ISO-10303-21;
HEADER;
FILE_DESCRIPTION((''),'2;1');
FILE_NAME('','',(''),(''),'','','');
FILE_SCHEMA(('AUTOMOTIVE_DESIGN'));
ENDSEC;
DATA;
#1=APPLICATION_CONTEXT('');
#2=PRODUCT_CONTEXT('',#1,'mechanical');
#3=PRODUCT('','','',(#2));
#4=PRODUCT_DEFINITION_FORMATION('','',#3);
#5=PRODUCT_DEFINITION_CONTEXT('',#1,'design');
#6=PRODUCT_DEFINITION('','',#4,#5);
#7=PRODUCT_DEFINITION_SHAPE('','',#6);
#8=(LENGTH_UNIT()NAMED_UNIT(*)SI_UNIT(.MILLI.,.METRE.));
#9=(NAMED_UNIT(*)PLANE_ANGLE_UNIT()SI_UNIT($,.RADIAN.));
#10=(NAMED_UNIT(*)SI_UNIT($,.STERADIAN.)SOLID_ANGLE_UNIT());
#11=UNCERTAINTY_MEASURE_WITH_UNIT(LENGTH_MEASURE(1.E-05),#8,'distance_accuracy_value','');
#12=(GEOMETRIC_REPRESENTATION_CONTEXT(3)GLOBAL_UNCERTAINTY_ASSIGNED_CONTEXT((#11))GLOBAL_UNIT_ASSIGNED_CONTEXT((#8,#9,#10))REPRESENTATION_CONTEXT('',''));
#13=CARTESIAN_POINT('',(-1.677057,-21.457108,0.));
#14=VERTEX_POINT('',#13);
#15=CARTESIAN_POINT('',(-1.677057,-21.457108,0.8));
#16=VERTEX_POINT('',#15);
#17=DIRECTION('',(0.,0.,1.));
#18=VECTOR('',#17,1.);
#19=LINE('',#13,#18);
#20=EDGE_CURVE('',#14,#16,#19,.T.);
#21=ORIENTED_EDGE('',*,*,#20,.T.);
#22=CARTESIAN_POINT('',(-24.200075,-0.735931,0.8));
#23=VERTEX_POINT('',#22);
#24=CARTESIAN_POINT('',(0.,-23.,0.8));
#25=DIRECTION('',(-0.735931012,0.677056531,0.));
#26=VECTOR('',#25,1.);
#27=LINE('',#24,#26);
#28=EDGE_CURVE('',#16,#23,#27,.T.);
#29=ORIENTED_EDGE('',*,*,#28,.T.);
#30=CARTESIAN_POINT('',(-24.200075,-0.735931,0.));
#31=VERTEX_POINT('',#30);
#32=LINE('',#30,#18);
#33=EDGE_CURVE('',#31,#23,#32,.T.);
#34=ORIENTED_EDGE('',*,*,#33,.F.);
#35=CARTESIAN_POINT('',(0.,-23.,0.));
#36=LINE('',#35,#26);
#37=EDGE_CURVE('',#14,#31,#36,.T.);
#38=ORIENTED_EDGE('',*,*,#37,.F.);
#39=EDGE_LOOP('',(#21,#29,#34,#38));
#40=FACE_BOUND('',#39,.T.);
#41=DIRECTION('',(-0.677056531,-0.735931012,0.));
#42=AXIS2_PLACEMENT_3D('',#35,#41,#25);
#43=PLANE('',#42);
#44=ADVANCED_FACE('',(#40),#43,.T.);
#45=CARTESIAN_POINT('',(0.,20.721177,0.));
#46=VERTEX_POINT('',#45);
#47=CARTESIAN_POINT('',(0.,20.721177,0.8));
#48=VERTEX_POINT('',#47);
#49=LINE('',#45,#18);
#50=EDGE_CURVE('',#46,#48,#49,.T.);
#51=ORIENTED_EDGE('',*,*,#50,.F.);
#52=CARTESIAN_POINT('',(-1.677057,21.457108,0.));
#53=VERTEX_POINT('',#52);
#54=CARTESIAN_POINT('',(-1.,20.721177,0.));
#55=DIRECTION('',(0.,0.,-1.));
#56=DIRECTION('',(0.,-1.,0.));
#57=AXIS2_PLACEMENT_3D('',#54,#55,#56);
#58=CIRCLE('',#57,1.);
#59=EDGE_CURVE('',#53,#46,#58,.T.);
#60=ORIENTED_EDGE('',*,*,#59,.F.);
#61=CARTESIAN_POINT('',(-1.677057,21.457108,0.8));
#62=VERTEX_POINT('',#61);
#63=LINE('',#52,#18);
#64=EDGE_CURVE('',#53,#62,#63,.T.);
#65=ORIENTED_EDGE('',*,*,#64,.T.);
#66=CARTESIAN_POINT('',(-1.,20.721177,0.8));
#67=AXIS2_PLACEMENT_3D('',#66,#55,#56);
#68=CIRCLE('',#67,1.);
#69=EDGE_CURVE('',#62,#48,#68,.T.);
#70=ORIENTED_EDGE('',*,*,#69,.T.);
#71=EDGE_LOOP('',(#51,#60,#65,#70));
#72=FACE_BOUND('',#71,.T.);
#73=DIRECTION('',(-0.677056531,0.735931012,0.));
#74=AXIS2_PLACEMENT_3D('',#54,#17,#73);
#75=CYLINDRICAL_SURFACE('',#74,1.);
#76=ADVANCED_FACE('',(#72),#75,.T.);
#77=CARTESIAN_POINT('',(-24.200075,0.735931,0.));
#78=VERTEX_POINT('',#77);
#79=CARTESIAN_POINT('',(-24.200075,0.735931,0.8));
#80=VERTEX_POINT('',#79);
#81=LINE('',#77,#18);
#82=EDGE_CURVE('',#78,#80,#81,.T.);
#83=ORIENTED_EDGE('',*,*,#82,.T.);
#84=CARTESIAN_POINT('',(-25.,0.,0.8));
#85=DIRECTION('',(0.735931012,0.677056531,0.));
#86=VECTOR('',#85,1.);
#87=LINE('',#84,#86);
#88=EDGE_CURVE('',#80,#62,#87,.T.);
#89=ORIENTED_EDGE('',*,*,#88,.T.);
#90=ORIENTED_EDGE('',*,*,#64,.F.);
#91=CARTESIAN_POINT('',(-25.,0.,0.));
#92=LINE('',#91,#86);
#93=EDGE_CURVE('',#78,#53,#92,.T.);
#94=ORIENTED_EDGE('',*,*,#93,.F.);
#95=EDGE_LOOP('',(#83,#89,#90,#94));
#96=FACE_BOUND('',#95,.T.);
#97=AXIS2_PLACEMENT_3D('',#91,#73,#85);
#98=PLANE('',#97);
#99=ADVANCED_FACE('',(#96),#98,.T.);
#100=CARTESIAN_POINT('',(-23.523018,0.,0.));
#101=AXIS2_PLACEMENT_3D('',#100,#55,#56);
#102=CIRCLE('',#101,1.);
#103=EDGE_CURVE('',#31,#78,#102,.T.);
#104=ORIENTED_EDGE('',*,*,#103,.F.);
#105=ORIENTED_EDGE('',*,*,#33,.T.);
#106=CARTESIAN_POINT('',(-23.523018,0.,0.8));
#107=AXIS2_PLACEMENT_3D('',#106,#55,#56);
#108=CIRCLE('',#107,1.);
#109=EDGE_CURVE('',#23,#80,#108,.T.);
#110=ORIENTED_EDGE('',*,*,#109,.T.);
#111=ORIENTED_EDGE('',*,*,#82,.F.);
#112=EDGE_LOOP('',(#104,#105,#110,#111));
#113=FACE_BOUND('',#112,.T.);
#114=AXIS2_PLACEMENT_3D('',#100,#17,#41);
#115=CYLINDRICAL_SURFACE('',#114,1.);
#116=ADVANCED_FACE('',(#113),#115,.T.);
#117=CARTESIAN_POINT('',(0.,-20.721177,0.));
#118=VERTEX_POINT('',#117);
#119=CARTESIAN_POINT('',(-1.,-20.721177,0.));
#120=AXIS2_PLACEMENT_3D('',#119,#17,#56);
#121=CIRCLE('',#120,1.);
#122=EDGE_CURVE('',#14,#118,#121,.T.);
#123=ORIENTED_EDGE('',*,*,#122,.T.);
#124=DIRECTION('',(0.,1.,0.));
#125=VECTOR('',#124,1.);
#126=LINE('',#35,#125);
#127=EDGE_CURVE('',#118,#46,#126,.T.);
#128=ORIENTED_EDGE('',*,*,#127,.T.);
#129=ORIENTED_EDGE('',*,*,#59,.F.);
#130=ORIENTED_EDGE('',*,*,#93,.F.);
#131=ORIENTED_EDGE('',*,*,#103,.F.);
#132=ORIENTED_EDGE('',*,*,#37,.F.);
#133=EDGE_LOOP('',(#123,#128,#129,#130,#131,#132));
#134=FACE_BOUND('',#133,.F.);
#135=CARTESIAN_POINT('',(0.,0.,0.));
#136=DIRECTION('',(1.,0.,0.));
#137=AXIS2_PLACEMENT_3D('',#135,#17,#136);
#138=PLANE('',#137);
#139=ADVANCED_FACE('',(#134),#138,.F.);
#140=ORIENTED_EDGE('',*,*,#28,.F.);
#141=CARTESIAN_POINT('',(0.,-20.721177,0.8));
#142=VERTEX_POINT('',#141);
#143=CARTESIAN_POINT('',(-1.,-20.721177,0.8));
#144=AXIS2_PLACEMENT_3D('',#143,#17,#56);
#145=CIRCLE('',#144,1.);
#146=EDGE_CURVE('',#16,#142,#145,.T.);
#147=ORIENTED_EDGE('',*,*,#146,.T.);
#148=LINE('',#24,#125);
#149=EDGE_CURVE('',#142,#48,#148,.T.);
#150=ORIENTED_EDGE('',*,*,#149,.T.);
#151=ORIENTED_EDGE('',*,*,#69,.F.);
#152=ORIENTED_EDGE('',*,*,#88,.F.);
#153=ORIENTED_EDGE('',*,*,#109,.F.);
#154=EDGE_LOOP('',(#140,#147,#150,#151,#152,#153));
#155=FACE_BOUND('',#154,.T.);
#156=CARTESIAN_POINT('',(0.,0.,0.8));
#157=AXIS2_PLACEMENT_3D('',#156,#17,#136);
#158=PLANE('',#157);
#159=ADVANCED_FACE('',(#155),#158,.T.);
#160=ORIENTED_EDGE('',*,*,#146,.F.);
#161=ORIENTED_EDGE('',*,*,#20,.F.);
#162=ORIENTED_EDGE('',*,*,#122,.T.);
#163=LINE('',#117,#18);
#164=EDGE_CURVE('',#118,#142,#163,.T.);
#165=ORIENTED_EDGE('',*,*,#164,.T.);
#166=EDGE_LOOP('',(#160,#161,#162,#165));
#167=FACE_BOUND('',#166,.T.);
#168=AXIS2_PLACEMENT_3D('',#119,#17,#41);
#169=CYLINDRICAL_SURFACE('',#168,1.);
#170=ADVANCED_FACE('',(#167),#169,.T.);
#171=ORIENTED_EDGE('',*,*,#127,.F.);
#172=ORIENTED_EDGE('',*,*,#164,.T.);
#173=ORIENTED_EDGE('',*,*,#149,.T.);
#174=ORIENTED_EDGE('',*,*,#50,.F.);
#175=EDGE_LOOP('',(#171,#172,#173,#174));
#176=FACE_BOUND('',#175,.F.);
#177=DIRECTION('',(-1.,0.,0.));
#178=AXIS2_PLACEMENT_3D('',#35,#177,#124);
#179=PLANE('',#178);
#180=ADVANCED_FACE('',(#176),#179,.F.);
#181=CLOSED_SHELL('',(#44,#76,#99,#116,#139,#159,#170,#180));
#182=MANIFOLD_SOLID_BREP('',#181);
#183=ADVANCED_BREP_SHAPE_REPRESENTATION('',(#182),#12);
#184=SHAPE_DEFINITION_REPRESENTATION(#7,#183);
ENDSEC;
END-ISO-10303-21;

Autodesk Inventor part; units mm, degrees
ref_plane "YZ Plane" through (0, 0, 0) normal (1, 0, 0) x (0, 1, 0)
ref_plane "XZ Plane" through (0, 0, 0) normal (0, 1, 0) x (-1, 0, 0)
ref_plane "XY Plane" through (0, 0, 0) normal (0, 0, 1) x (1, 0, 0)
sketch "Sketch1" plane through (0, 0, 0) normal (0, 0, 1) x (1, 0, 0)
  line L0 (0, -23) -> (0, 23)
  line L1 (0, -23) -> (-25, 0)
  line L2 (-25, 0) -> (0, 23)
  point P0 (0, 0)
  point P1 (0, 0)
  point P2 (0, 0)
  dimension "d1" = 46
  dimension "d9" = 25
extrude "Plate1" add sketch "Sketch1" along normal blind 0.8
fillet "Corner Round2" radius 1 3 edges at (0, -23, 0.4) (-25, 0, 0.4) (0, 23, 0.4)
equation "\"d2\" = Thickness"
equation "\"BendReliefWidth\" = Thickness"
equation "\"BendReliefDepth\" = 0.5 * Thickness"
equation "\"CornerReliefSize\" = 4 * Thickness"
equation "\"MinimumRemnant\" = 2 * Thickness"
equation "\"TransitionRadius\" = BendRadius"
equation "\"JacobiRadiusSize\" = BendRadius"
equation "\"GapSize\" = Thickness"
equation "\"Thickness\" = 0.8"
equation "\"BendRadius\" = 2.75"
properties part number "DSB-509 CAP roof" material "Stainless Steel"
